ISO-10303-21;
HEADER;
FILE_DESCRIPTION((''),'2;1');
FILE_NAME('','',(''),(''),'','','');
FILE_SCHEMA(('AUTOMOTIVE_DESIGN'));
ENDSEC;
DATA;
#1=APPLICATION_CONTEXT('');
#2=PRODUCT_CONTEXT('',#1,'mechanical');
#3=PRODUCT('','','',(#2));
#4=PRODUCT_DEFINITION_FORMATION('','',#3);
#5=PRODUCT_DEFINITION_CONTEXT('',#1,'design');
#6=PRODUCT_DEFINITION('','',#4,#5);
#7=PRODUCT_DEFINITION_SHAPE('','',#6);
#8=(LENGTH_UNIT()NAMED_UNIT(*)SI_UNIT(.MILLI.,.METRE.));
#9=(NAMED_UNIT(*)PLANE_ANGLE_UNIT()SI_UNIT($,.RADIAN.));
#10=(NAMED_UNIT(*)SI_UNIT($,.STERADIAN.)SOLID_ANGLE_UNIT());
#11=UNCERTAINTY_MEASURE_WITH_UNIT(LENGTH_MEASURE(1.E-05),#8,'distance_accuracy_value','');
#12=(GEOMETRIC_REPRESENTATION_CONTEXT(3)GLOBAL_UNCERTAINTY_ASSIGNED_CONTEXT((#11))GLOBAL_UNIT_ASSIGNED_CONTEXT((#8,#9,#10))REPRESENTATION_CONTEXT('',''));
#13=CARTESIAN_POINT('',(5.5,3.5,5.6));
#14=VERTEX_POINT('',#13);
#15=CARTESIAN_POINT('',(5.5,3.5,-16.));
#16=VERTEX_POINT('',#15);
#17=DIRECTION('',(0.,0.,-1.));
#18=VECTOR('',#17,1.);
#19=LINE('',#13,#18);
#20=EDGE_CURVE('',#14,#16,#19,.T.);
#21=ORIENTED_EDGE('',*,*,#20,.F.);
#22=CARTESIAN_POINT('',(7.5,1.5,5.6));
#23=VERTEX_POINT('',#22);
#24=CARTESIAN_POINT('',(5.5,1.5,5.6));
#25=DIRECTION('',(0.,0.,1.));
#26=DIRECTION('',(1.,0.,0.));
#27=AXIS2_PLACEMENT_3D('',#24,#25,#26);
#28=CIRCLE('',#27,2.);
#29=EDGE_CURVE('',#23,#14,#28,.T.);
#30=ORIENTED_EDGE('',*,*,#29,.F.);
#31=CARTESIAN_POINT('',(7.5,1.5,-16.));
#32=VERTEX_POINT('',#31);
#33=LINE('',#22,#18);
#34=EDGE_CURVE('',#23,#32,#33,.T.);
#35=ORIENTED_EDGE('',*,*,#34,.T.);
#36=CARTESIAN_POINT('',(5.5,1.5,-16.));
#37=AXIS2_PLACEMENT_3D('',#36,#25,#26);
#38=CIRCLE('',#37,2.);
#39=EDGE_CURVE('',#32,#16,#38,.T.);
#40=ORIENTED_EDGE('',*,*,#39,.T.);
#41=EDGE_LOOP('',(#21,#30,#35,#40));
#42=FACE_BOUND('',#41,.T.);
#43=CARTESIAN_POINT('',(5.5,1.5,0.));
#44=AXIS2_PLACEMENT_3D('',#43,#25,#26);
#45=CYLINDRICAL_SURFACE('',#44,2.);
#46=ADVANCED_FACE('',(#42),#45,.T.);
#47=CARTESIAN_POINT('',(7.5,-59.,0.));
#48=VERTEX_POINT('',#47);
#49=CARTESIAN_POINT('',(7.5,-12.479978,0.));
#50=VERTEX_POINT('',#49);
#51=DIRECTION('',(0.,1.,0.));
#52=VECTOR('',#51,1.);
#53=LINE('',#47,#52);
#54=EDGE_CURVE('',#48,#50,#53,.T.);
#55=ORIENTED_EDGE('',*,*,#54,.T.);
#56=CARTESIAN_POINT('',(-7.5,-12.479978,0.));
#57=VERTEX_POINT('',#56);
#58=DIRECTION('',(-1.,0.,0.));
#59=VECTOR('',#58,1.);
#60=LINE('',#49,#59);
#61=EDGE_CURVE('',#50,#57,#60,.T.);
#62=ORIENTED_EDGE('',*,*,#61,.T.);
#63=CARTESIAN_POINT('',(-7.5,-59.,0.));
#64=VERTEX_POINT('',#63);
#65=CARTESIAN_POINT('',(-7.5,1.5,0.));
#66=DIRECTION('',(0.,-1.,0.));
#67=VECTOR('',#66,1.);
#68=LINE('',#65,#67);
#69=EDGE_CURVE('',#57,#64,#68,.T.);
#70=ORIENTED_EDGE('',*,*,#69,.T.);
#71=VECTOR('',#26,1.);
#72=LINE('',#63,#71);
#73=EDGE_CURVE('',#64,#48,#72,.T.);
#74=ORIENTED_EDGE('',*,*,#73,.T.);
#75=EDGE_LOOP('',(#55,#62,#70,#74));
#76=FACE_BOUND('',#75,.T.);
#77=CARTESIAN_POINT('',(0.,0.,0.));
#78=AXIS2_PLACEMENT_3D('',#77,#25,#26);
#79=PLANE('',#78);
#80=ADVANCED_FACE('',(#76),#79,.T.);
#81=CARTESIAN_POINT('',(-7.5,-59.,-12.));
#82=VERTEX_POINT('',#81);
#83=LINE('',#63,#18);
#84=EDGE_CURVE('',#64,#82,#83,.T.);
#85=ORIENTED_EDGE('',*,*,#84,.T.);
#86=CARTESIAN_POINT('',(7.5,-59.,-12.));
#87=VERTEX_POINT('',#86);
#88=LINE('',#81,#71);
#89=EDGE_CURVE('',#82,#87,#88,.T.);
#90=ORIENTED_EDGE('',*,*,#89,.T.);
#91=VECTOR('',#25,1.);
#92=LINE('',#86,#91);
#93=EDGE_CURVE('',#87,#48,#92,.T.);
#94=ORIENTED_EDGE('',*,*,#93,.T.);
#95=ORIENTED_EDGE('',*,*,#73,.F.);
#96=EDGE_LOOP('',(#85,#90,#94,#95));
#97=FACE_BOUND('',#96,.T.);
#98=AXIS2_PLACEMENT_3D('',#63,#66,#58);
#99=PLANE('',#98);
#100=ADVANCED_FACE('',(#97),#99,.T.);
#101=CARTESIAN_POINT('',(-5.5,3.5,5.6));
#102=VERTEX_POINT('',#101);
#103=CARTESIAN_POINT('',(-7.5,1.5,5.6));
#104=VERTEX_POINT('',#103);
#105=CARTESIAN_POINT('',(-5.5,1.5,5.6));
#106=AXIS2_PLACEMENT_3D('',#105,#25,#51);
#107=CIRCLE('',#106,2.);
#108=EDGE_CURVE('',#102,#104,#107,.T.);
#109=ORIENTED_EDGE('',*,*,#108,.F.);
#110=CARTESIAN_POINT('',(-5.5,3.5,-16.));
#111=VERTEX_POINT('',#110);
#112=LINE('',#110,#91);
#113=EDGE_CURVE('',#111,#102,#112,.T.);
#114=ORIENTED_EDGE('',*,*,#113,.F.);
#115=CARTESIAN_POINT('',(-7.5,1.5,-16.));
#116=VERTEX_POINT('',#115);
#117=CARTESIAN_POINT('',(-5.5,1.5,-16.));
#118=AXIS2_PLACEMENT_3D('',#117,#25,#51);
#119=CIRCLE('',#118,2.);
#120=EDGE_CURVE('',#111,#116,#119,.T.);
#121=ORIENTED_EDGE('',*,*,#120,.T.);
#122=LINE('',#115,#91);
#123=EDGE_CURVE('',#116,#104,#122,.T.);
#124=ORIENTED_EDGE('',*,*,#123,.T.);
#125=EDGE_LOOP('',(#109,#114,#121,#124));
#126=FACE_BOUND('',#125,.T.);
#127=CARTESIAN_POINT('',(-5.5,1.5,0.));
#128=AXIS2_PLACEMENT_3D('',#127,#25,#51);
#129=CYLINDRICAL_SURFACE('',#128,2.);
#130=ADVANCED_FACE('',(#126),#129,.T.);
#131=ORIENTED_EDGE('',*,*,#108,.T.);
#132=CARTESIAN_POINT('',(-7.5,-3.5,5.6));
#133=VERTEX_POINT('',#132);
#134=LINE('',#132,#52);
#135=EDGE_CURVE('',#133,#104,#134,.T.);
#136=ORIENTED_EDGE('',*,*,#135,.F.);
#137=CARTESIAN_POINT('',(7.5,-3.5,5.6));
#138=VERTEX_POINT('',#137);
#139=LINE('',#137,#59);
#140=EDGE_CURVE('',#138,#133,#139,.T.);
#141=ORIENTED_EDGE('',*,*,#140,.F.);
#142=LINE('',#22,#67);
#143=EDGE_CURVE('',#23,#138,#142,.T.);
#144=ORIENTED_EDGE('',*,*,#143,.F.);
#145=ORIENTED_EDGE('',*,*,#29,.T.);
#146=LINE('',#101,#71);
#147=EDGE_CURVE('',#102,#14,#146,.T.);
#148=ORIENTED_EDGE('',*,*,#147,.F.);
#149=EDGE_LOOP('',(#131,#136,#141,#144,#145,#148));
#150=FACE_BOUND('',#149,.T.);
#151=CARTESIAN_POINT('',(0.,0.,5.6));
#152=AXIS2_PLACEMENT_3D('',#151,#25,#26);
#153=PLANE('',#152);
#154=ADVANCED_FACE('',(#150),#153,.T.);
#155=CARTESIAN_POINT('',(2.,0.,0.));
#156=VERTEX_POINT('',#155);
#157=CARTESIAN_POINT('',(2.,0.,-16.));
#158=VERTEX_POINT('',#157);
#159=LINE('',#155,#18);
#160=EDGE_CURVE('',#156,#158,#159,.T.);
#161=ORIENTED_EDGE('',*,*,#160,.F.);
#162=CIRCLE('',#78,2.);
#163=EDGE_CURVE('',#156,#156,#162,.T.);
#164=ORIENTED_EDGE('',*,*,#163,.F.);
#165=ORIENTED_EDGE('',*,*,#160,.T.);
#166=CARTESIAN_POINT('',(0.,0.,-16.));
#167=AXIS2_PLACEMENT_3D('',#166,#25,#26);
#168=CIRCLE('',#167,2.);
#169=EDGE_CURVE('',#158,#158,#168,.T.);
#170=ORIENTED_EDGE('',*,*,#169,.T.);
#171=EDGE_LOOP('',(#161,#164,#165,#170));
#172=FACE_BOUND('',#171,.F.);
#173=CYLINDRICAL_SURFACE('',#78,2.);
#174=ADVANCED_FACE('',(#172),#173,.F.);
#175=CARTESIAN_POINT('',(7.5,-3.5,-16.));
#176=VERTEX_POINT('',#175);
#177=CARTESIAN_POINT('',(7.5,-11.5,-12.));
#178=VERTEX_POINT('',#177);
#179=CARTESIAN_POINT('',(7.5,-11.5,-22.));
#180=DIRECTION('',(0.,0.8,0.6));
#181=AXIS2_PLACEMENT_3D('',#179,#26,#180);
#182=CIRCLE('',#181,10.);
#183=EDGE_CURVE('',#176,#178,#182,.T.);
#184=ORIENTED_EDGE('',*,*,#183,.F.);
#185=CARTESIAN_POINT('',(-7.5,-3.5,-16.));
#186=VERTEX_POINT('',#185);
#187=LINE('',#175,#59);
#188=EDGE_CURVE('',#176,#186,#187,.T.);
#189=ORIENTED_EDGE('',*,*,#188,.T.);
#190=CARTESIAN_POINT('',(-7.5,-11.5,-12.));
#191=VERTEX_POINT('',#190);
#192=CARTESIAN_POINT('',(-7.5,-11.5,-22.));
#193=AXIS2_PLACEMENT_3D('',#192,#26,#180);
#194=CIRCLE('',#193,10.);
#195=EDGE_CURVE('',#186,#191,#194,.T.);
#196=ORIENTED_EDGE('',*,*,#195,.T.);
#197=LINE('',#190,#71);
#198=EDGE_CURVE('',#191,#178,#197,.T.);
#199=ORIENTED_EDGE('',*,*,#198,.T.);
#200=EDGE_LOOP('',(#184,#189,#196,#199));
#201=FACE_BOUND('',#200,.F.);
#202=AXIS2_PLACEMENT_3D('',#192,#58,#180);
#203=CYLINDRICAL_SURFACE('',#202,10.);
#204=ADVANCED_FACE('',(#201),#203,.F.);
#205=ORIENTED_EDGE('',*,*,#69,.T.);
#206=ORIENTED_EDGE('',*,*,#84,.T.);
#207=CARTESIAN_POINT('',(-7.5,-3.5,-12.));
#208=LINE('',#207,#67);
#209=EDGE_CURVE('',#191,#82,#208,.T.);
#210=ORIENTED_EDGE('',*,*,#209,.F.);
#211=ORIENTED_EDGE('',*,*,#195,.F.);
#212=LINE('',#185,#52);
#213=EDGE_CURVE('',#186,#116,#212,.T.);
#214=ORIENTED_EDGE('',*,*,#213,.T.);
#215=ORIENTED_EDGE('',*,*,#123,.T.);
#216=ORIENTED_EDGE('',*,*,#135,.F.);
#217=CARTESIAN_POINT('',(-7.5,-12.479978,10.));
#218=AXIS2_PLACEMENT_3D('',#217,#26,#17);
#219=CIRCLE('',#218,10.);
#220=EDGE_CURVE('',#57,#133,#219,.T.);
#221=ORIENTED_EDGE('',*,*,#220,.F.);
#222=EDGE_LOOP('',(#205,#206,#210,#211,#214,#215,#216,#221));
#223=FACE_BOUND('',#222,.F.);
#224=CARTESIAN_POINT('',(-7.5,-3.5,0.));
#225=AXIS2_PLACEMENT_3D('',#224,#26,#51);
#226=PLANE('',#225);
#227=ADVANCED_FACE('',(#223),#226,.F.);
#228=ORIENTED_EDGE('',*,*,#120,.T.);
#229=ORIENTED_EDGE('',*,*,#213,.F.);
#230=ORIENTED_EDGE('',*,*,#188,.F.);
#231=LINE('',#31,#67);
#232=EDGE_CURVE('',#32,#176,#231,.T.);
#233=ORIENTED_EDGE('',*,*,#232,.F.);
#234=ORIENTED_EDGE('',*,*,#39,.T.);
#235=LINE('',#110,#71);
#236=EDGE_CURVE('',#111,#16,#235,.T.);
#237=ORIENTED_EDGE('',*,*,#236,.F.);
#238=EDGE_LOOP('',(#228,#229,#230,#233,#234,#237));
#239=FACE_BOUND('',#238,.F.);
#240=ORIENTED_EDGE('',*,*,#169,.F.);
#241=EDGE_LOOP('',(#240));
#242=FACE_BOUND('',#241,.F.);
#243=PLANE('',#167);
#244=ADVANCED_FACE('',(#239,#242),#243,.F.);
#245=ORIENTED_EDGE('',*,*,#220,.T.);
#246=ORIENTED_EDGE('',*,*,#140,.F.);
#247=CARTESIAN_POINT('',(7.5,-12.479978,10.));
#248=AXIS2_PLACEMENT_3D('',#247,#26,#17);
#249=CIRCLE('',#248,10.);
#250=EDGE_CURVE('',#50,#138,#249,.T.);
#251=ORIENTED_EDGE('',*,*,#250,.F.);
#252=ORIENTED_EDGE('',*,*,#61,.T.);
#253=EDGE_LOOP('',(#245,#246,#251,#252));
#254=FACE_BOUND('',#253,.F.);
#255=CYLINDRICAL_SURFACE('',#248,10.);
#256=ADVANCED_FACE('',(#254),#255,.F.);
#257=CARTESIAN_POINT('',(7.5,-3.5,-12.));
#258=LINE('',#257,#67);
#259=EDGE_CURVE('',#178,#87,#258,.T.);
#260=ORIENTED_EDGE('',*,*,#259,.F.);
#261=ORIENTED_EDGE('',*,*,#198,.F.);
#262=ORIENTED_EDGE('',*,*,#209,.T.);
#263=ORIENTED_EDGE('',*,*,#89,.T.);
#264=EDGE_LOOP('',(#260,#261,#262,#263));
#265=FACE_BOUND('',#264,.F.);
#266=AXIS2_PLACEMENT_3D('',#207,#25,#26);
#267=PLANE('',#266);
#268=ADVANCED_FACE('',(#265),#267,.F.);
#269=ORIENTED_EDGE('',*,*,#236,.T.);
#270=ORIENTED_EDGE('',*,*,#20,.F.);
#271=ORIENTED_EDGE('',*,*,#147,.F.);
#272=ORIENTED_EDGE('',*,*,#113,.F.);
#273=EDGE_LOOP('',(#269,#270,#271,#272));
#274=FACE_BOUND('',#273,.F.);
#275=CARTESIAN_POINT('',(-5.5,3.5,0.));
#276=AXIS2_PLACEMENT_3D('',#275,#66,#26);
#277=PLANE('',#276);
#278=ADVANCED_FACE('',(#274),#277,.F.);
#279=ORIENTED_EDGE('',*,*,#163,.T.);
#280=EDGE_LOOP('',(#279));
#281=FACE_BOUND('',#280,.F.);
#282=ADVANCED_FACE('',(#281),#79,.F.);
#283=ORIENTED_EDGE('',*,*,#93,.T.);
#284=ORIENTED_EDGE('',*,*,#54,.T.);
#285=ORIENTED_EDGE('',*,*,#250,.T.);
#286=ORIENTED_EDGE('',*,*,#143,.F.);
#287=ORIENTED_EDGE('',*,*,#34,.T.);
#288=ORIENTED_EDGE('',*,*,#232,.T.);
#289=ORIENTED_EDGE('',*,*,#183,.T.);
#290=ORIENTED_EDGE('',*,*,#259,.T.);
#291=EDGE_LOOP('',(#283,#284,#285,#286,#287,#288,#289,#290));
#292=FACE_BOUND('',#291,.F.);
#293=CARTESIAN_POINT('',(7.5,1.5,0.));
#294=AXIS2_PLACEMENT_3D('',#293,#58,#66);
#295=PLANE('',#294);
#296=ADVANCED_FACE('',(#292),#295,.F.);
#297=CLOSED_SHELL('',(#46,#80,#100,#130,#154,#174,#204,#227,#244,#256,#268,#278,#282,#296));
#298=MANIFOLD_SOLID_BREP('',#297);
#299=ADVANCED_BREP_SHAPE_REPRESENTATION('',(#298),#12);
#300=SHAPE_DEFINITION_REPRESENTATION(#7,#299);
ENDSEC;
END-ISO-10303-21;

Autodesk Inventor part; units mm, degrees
ref_plane "YZ Plane" through (0, 0, 0) normal (1, 0, 0) x (0, 1, 0)
ref_plane "XZ Plane" through (0, 0, 0) normal (0, 1, 0) x (-1, 0, 0)
ref_plane "XY Plane" through (0, 0, 0) normal (0, 0, 1) x (1, 0, 0)
sketch "Sketch1" plane through (0, 0, 0) normal (0, 0, 1) x (1, 0, 0)
  circle A0 centre (0, 0) radius 2
  line L0 (-5.5, 3.5) -> (5.5, 3.5)
  line L1 (7.5, 1.5) -> (7.5, -3.5)
  line L2 (7.5, -3.5) -> (-7.5, -3.5)
  line L3 (-7.5, -3.5) -> (-7.5, 1.5)
  arc A1 (-5.5, 3.5) -> (-7.5, 1.5) centre (-5.5, 1.5) ccw
  arc A2 (7.5, 1.5) -> (5.5, 3.5) centre (5.5, 1.5) ccw
  point P0 (7.5, 3.5)
  dimension "d0" = 4
  dimension "d1" = 15
  dimension "d2" = 7
  dimension "d3" = 7.5
  dimension "d4" = 3.5
  dimension "d5" = 2
extrude "Extrusion1" add sketch "Sketch1" against normal blind 16
sketch "Sketch2" plane through (-7.5, -3.5, 0) normal (0, -1, 0) x (-1, 0, 0)
  line L0 (-15, 0) -> (-13, 0) projected
  line L1 (0, 12) -> (-15, 12)
  line L2 (-15, 12) -> (-15, 0)
  line L3 (-15, 0) -> (0, 0)
  line L4 (0, 0) -> (0, 12)
  line L5 (-15, 16) -> (0, 16) projected
  line L6 (0, 0) -> (0, 16) projected
  point P0 (-7.5, 0)
  dimension "d8" = 4
  dimension "d9" = 0
  dimension "d18" = 15
  dimension "d19" = 12
extrude "Extrusion2" add sketch "Sketch2" along normal blind 55.5
fillet "Fillet2" radius 10 1 edges at (0, -3.5, -12)
sketch "Sketch4" plane through (0, 0, 0) normal (0, 0, 1) x (1, 0, 0)
  line L0 (7.5, -3.5) -> (-7.5, -3.5) projected
  line L1 (7.5, -3.5) -> (-7.5, -3.5)
  line L2 (-7.5, -3.5) -> (-7.5, 1.5)
  line L3 (-5.5, 3.5) -> (5.5, 3.5)
  line L4 (7.5, 1.5) -> (7.5, -3.5)
  arc A0 (-5.5, 3.5) -> (-7.5, 1.5) centre (-5.5, 1.5) ccw
  arc A1 (7.5, 1.5) -> (5.5, 3.5) centre (5.5, 1.5) ccw
  point P0 (0, 0)
  dimension "d14" = 2
extrude "Extrusion3" add sketch "Sketch4" along normal blind 5.6
fillet "Fillet3" radius 10 1 edges at (0, -3.5, 0)
properties part number "frontside arm" material "UHMW, Black"
